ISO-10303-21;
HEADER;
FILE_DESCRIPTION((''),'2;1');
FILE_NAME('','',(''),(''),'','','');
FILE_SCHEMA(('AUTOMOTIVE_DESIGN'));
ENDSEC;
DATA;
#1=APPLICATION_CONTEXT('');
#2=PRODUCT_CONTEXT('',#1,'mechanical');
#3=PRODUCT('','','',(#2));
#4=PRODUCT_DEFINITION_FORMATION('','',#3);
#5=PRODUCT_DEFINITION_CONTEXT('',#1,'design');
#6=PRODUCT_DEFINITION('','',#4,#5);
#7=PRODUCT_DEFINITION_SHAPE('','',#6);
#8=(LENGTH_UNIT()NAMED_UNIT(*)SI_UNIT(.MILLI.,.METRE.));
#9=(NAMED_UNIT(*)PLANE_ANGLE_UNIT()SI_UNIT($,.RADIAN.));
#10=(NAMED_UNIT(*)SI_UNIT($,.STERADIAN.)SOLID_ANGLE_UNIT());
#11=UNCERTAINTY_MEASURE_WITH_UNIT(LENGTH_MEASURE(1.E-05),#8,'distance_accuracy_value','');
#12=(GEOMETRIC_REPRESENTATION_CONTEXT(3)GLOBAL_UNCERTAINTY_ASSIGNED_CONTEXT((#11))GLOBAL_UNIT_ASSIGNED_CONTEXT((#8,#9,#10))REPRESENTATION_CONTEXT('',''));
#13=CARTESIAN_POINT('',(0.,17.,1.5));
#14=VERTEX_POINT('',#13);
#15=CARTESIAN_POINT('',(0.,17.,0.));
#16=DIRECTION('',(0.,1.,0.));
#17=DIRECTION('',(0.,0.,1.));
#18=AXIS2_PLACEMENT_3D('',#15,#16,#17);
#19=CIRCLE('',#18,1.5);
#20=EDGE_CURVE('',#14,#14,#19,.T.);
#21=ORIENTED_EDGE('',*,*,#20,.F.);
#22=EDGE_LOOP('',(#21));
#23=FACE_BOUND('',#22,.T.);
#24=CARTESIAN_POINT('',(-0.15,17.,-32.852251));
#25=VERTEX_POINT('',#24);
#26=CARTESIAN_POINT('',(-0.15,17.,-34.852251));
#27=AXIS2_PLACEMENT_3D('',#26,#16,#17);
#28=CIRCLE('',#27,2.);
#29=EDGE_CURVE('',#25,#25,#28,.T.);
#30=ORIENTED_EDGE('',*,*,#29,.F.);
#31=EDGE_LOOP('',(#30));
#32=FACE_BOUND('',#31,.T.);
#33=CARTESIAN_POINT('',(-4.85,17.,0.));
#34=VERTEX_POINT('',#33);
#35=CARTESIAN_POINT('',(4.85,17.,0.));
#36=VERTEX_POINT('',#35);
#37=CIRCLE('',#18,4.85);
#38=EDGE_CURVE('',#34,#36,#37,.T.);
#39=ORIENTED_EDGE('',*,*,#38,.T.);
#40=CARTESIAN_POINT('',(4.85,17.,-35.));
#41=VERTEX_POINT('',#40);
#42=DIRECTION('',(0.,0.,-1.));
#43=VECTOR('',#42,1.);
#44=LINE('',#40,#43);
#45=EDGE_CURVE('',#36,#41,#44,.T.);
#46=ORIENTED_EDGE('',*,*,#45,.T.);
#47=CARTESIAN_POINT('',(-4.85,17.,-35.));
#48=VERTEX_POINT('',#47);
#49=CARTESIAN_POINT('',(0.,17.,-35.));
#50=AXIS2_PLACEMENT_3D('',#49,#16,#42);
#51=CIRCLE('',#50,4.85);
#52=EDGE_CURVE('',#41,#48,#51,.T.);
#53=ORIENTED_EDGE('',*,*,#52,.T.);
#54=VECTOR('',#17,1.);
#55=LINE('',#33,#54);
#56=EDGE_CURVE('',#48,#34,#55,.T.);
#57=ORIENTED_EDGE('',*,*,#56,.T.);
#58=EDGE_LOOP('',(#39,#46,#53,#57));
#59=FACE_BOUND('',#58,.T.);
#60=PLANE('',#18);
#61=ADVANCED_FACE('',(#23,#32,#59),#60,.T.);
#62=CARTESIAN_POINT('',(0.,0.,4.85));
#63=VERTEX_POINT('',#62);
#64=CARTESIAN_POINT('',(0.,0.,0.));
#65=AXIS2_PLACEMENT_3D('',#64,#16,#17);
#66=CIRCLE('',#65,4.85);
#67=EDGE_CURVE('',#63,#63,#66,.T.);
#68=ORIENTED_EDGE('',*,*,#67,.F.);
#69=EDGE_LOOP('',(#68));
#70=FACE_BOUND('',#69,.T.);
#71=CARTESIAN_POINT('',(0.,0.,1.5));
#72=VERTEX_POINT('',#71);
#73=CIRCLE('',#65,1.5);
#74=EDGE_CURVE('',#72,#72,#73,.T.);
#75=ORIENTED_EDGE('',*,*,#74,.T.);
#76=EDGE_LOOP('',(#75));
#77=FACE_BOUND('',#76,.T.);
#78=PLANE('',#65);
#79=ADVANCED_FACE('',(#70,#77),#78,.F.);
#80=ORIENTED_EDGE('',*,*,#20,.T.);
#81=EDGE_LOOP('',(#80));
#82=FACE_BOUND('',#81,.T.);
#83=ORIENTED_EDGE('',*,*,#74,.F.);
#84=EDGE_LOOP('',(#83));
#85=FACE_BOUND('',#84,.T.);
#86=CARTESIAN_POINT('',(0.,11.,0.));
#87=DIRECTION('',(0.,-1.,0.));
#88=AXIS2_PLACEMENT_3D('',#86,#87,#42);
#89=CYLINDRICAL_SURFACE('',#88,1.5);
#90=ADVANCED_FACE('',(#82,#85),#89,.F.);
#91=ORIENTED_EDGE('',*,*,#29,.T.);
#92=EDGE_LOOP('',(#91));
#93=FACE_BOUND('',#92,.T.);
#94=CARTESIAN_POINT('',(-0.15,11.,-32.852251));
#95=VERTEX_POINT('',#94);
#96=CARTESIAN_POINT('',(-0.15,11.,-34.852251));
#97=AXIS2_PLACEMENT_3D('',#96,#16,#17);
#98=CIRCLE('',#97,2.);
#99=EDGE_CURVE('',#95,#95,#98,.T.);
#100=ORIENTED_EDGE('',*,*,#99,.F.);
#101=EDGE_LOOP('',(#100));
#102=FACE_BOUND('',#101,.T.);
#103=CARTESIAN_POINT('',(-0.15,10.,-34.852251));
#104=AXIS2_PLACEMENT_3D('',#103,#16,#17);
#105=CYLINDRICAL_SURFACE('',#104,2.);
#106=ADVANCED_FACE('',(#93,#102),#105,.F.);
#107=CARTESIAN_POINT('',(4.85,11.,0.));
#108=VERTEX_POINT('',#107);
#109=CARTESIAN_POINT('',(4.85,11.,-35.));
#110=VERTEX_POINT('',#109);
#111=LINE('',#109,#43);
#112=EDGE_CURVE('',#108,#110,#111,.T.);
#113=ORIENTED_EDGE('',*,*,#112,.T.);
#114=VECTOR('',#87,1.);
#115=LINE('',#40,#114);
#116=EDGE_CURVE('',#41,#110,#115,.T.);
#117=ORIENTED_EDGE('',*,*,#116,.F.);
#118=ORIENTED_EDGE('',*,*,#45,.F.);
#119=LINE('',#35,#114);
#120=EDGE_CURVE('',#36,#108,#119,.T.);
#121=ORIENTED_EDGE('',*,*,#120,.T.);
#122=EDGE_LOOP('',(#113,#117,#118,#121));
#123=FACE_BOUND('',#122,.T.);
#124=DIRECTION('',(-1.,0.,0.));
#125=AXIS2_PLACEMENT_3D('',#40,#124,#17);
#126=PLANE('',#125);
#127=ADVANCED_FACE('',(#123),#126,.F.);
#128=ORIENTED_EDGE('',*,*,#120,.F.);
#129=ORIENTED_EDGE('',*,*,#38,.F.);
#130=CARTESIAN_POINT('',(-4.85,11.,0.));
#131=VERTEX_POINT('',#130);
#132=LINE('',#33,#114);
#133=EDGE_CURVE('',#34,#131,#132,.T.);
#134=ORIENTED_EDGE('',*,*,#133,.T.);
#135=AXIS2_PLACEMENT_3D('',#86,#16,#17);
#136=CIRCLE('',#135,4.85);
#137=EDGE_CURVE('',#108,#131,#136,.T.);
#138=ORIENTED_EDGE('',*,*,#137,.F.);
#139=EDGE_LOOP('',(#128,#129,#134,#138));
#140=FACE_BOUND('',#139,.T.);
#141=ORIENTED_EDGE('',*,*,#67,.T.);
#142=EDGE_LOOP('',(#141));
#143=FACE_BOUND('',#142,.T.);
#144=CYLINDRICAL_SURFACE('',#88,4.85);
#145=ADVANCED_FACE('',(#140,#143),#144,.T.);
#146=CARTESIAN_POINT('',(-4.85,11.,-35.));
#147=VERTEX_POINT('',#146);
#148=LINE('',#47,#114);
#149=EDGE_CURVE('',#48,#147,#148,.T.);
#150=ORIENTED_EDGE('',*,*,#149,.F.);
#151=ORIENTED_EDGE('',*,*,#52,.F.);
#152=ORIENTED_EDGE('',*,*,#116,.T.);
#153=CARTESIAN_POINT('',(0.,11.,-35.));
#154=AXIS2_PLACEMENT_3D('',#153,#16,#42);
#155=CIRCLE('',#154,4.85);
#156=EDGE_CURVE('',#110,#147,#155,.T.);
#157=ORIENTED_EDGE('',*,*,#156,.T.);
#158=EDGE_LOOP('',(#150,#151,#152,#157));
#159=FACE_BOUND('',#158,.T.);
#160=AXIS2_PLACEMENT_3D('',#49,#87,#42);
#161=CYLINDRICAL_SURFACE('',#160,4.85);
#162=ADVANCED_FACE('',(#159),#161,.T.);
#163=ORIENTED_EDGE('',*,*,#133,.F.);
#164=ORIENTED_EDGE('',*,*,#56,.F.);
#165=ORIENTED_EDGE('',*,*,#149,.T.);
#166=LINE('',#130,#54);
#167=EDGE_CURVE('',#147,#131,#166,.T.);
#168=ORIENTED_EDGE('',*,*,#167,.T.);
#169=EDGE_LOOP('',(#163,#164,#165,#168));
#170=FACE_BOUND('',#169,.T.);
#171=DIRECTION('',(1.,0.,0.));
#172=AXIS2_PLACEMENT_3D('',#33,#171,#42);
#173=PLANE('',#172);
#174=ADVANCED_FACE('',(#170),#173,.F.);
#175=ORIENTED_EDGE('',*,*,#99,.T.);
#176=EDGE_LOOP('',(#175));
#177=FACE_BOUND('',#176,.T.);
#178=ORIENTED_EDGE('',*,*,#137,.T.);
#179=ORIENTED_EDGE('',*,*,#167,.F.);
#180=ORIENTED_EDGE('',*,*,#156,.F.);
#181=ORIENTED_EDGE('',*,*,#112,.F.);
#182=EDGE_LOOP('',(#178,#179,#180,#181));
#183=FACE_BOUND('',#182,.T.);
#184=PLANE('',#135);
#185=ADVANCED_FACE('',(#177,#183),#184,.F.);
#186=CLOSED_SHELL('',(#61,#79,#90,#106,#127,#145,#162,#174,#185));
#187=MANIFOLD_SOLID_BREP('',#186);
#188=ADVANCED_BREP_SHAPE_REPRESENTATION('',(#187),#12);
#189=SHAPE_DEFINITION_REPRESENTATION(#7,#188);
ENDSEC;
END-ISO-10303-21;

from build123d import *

# Parameters (mm, degrees)
SKETCH1_R           = 4.85
SKETCH1_R_2         = 1.5
BOSS_EXTRUDE1_DEPTH = 11
BOSS_EXTRUDE2_DEPTH = 6
SKETCH3_R           = 2
CUT_EXTRUDE1_DEPTH  = 7
SKETCH6_R           = 1.5
CUT_EXTRUDE2_DEPTH  = 10


with BuildPart() as part:
    # Sketch1 → Boss-Extrude1 (new body)
    with BuildSketch(Plane(origin=(0, 0, 0), x_dir=(1, 0, 0), z_dir=(0, 1, 0))):
        Circle(SKETCH1_R)
        Circle(SKETCH1_R_2, mode=Mode.SUBTRACT)
    extrude(amount=BOSS_EXTRUDE1_DEPTH)

    # Sketch2 → Boss-Extrude2 (add)
    with BuildSketch(Plane(origin=(0, 11, 0), x_dir=(1, 0, 0), z_dir=(0, 1, 0))):
        with BuildLine():
            Line((-4.85, 0), (-4.85, 35))
            ThreePointArc((-4.85, 35), (0, 39.85), (4.85, 35))
            Line((4.85, 35), (4.85, 0))
            ThreePointArc((4.85, 0), (0, -4.85), (-4.85, 0))
        make_face()
    extrude(amount=BOSS_EXTRUDE2_DEPTH)

    # Sketch3 → Cut-Extrude1 (cut)
    with BuildSketch(Plane(origin=(0, 17, 0), x_dir=(1, 0, 0), z_dir=(0, 1, 0))):
        with Locations((-0.15, 34.852250506)):
            Circle(SKETCH3_R)
    extrude(amount=-CUT_EXTRUDE1_DEPTH, mode=Mode.SUBTRACT)

    # Sketch6 → Cut-Extrude2 (cut)
    with BuildSketch(Plane.XZ.offset(-11)):
        Circle(SKETCH6_R)
    extrude(amount=-CUT_EXTRUDE2_DEPTH, mode=Mode.SUBTRACT)


solid = part.part
